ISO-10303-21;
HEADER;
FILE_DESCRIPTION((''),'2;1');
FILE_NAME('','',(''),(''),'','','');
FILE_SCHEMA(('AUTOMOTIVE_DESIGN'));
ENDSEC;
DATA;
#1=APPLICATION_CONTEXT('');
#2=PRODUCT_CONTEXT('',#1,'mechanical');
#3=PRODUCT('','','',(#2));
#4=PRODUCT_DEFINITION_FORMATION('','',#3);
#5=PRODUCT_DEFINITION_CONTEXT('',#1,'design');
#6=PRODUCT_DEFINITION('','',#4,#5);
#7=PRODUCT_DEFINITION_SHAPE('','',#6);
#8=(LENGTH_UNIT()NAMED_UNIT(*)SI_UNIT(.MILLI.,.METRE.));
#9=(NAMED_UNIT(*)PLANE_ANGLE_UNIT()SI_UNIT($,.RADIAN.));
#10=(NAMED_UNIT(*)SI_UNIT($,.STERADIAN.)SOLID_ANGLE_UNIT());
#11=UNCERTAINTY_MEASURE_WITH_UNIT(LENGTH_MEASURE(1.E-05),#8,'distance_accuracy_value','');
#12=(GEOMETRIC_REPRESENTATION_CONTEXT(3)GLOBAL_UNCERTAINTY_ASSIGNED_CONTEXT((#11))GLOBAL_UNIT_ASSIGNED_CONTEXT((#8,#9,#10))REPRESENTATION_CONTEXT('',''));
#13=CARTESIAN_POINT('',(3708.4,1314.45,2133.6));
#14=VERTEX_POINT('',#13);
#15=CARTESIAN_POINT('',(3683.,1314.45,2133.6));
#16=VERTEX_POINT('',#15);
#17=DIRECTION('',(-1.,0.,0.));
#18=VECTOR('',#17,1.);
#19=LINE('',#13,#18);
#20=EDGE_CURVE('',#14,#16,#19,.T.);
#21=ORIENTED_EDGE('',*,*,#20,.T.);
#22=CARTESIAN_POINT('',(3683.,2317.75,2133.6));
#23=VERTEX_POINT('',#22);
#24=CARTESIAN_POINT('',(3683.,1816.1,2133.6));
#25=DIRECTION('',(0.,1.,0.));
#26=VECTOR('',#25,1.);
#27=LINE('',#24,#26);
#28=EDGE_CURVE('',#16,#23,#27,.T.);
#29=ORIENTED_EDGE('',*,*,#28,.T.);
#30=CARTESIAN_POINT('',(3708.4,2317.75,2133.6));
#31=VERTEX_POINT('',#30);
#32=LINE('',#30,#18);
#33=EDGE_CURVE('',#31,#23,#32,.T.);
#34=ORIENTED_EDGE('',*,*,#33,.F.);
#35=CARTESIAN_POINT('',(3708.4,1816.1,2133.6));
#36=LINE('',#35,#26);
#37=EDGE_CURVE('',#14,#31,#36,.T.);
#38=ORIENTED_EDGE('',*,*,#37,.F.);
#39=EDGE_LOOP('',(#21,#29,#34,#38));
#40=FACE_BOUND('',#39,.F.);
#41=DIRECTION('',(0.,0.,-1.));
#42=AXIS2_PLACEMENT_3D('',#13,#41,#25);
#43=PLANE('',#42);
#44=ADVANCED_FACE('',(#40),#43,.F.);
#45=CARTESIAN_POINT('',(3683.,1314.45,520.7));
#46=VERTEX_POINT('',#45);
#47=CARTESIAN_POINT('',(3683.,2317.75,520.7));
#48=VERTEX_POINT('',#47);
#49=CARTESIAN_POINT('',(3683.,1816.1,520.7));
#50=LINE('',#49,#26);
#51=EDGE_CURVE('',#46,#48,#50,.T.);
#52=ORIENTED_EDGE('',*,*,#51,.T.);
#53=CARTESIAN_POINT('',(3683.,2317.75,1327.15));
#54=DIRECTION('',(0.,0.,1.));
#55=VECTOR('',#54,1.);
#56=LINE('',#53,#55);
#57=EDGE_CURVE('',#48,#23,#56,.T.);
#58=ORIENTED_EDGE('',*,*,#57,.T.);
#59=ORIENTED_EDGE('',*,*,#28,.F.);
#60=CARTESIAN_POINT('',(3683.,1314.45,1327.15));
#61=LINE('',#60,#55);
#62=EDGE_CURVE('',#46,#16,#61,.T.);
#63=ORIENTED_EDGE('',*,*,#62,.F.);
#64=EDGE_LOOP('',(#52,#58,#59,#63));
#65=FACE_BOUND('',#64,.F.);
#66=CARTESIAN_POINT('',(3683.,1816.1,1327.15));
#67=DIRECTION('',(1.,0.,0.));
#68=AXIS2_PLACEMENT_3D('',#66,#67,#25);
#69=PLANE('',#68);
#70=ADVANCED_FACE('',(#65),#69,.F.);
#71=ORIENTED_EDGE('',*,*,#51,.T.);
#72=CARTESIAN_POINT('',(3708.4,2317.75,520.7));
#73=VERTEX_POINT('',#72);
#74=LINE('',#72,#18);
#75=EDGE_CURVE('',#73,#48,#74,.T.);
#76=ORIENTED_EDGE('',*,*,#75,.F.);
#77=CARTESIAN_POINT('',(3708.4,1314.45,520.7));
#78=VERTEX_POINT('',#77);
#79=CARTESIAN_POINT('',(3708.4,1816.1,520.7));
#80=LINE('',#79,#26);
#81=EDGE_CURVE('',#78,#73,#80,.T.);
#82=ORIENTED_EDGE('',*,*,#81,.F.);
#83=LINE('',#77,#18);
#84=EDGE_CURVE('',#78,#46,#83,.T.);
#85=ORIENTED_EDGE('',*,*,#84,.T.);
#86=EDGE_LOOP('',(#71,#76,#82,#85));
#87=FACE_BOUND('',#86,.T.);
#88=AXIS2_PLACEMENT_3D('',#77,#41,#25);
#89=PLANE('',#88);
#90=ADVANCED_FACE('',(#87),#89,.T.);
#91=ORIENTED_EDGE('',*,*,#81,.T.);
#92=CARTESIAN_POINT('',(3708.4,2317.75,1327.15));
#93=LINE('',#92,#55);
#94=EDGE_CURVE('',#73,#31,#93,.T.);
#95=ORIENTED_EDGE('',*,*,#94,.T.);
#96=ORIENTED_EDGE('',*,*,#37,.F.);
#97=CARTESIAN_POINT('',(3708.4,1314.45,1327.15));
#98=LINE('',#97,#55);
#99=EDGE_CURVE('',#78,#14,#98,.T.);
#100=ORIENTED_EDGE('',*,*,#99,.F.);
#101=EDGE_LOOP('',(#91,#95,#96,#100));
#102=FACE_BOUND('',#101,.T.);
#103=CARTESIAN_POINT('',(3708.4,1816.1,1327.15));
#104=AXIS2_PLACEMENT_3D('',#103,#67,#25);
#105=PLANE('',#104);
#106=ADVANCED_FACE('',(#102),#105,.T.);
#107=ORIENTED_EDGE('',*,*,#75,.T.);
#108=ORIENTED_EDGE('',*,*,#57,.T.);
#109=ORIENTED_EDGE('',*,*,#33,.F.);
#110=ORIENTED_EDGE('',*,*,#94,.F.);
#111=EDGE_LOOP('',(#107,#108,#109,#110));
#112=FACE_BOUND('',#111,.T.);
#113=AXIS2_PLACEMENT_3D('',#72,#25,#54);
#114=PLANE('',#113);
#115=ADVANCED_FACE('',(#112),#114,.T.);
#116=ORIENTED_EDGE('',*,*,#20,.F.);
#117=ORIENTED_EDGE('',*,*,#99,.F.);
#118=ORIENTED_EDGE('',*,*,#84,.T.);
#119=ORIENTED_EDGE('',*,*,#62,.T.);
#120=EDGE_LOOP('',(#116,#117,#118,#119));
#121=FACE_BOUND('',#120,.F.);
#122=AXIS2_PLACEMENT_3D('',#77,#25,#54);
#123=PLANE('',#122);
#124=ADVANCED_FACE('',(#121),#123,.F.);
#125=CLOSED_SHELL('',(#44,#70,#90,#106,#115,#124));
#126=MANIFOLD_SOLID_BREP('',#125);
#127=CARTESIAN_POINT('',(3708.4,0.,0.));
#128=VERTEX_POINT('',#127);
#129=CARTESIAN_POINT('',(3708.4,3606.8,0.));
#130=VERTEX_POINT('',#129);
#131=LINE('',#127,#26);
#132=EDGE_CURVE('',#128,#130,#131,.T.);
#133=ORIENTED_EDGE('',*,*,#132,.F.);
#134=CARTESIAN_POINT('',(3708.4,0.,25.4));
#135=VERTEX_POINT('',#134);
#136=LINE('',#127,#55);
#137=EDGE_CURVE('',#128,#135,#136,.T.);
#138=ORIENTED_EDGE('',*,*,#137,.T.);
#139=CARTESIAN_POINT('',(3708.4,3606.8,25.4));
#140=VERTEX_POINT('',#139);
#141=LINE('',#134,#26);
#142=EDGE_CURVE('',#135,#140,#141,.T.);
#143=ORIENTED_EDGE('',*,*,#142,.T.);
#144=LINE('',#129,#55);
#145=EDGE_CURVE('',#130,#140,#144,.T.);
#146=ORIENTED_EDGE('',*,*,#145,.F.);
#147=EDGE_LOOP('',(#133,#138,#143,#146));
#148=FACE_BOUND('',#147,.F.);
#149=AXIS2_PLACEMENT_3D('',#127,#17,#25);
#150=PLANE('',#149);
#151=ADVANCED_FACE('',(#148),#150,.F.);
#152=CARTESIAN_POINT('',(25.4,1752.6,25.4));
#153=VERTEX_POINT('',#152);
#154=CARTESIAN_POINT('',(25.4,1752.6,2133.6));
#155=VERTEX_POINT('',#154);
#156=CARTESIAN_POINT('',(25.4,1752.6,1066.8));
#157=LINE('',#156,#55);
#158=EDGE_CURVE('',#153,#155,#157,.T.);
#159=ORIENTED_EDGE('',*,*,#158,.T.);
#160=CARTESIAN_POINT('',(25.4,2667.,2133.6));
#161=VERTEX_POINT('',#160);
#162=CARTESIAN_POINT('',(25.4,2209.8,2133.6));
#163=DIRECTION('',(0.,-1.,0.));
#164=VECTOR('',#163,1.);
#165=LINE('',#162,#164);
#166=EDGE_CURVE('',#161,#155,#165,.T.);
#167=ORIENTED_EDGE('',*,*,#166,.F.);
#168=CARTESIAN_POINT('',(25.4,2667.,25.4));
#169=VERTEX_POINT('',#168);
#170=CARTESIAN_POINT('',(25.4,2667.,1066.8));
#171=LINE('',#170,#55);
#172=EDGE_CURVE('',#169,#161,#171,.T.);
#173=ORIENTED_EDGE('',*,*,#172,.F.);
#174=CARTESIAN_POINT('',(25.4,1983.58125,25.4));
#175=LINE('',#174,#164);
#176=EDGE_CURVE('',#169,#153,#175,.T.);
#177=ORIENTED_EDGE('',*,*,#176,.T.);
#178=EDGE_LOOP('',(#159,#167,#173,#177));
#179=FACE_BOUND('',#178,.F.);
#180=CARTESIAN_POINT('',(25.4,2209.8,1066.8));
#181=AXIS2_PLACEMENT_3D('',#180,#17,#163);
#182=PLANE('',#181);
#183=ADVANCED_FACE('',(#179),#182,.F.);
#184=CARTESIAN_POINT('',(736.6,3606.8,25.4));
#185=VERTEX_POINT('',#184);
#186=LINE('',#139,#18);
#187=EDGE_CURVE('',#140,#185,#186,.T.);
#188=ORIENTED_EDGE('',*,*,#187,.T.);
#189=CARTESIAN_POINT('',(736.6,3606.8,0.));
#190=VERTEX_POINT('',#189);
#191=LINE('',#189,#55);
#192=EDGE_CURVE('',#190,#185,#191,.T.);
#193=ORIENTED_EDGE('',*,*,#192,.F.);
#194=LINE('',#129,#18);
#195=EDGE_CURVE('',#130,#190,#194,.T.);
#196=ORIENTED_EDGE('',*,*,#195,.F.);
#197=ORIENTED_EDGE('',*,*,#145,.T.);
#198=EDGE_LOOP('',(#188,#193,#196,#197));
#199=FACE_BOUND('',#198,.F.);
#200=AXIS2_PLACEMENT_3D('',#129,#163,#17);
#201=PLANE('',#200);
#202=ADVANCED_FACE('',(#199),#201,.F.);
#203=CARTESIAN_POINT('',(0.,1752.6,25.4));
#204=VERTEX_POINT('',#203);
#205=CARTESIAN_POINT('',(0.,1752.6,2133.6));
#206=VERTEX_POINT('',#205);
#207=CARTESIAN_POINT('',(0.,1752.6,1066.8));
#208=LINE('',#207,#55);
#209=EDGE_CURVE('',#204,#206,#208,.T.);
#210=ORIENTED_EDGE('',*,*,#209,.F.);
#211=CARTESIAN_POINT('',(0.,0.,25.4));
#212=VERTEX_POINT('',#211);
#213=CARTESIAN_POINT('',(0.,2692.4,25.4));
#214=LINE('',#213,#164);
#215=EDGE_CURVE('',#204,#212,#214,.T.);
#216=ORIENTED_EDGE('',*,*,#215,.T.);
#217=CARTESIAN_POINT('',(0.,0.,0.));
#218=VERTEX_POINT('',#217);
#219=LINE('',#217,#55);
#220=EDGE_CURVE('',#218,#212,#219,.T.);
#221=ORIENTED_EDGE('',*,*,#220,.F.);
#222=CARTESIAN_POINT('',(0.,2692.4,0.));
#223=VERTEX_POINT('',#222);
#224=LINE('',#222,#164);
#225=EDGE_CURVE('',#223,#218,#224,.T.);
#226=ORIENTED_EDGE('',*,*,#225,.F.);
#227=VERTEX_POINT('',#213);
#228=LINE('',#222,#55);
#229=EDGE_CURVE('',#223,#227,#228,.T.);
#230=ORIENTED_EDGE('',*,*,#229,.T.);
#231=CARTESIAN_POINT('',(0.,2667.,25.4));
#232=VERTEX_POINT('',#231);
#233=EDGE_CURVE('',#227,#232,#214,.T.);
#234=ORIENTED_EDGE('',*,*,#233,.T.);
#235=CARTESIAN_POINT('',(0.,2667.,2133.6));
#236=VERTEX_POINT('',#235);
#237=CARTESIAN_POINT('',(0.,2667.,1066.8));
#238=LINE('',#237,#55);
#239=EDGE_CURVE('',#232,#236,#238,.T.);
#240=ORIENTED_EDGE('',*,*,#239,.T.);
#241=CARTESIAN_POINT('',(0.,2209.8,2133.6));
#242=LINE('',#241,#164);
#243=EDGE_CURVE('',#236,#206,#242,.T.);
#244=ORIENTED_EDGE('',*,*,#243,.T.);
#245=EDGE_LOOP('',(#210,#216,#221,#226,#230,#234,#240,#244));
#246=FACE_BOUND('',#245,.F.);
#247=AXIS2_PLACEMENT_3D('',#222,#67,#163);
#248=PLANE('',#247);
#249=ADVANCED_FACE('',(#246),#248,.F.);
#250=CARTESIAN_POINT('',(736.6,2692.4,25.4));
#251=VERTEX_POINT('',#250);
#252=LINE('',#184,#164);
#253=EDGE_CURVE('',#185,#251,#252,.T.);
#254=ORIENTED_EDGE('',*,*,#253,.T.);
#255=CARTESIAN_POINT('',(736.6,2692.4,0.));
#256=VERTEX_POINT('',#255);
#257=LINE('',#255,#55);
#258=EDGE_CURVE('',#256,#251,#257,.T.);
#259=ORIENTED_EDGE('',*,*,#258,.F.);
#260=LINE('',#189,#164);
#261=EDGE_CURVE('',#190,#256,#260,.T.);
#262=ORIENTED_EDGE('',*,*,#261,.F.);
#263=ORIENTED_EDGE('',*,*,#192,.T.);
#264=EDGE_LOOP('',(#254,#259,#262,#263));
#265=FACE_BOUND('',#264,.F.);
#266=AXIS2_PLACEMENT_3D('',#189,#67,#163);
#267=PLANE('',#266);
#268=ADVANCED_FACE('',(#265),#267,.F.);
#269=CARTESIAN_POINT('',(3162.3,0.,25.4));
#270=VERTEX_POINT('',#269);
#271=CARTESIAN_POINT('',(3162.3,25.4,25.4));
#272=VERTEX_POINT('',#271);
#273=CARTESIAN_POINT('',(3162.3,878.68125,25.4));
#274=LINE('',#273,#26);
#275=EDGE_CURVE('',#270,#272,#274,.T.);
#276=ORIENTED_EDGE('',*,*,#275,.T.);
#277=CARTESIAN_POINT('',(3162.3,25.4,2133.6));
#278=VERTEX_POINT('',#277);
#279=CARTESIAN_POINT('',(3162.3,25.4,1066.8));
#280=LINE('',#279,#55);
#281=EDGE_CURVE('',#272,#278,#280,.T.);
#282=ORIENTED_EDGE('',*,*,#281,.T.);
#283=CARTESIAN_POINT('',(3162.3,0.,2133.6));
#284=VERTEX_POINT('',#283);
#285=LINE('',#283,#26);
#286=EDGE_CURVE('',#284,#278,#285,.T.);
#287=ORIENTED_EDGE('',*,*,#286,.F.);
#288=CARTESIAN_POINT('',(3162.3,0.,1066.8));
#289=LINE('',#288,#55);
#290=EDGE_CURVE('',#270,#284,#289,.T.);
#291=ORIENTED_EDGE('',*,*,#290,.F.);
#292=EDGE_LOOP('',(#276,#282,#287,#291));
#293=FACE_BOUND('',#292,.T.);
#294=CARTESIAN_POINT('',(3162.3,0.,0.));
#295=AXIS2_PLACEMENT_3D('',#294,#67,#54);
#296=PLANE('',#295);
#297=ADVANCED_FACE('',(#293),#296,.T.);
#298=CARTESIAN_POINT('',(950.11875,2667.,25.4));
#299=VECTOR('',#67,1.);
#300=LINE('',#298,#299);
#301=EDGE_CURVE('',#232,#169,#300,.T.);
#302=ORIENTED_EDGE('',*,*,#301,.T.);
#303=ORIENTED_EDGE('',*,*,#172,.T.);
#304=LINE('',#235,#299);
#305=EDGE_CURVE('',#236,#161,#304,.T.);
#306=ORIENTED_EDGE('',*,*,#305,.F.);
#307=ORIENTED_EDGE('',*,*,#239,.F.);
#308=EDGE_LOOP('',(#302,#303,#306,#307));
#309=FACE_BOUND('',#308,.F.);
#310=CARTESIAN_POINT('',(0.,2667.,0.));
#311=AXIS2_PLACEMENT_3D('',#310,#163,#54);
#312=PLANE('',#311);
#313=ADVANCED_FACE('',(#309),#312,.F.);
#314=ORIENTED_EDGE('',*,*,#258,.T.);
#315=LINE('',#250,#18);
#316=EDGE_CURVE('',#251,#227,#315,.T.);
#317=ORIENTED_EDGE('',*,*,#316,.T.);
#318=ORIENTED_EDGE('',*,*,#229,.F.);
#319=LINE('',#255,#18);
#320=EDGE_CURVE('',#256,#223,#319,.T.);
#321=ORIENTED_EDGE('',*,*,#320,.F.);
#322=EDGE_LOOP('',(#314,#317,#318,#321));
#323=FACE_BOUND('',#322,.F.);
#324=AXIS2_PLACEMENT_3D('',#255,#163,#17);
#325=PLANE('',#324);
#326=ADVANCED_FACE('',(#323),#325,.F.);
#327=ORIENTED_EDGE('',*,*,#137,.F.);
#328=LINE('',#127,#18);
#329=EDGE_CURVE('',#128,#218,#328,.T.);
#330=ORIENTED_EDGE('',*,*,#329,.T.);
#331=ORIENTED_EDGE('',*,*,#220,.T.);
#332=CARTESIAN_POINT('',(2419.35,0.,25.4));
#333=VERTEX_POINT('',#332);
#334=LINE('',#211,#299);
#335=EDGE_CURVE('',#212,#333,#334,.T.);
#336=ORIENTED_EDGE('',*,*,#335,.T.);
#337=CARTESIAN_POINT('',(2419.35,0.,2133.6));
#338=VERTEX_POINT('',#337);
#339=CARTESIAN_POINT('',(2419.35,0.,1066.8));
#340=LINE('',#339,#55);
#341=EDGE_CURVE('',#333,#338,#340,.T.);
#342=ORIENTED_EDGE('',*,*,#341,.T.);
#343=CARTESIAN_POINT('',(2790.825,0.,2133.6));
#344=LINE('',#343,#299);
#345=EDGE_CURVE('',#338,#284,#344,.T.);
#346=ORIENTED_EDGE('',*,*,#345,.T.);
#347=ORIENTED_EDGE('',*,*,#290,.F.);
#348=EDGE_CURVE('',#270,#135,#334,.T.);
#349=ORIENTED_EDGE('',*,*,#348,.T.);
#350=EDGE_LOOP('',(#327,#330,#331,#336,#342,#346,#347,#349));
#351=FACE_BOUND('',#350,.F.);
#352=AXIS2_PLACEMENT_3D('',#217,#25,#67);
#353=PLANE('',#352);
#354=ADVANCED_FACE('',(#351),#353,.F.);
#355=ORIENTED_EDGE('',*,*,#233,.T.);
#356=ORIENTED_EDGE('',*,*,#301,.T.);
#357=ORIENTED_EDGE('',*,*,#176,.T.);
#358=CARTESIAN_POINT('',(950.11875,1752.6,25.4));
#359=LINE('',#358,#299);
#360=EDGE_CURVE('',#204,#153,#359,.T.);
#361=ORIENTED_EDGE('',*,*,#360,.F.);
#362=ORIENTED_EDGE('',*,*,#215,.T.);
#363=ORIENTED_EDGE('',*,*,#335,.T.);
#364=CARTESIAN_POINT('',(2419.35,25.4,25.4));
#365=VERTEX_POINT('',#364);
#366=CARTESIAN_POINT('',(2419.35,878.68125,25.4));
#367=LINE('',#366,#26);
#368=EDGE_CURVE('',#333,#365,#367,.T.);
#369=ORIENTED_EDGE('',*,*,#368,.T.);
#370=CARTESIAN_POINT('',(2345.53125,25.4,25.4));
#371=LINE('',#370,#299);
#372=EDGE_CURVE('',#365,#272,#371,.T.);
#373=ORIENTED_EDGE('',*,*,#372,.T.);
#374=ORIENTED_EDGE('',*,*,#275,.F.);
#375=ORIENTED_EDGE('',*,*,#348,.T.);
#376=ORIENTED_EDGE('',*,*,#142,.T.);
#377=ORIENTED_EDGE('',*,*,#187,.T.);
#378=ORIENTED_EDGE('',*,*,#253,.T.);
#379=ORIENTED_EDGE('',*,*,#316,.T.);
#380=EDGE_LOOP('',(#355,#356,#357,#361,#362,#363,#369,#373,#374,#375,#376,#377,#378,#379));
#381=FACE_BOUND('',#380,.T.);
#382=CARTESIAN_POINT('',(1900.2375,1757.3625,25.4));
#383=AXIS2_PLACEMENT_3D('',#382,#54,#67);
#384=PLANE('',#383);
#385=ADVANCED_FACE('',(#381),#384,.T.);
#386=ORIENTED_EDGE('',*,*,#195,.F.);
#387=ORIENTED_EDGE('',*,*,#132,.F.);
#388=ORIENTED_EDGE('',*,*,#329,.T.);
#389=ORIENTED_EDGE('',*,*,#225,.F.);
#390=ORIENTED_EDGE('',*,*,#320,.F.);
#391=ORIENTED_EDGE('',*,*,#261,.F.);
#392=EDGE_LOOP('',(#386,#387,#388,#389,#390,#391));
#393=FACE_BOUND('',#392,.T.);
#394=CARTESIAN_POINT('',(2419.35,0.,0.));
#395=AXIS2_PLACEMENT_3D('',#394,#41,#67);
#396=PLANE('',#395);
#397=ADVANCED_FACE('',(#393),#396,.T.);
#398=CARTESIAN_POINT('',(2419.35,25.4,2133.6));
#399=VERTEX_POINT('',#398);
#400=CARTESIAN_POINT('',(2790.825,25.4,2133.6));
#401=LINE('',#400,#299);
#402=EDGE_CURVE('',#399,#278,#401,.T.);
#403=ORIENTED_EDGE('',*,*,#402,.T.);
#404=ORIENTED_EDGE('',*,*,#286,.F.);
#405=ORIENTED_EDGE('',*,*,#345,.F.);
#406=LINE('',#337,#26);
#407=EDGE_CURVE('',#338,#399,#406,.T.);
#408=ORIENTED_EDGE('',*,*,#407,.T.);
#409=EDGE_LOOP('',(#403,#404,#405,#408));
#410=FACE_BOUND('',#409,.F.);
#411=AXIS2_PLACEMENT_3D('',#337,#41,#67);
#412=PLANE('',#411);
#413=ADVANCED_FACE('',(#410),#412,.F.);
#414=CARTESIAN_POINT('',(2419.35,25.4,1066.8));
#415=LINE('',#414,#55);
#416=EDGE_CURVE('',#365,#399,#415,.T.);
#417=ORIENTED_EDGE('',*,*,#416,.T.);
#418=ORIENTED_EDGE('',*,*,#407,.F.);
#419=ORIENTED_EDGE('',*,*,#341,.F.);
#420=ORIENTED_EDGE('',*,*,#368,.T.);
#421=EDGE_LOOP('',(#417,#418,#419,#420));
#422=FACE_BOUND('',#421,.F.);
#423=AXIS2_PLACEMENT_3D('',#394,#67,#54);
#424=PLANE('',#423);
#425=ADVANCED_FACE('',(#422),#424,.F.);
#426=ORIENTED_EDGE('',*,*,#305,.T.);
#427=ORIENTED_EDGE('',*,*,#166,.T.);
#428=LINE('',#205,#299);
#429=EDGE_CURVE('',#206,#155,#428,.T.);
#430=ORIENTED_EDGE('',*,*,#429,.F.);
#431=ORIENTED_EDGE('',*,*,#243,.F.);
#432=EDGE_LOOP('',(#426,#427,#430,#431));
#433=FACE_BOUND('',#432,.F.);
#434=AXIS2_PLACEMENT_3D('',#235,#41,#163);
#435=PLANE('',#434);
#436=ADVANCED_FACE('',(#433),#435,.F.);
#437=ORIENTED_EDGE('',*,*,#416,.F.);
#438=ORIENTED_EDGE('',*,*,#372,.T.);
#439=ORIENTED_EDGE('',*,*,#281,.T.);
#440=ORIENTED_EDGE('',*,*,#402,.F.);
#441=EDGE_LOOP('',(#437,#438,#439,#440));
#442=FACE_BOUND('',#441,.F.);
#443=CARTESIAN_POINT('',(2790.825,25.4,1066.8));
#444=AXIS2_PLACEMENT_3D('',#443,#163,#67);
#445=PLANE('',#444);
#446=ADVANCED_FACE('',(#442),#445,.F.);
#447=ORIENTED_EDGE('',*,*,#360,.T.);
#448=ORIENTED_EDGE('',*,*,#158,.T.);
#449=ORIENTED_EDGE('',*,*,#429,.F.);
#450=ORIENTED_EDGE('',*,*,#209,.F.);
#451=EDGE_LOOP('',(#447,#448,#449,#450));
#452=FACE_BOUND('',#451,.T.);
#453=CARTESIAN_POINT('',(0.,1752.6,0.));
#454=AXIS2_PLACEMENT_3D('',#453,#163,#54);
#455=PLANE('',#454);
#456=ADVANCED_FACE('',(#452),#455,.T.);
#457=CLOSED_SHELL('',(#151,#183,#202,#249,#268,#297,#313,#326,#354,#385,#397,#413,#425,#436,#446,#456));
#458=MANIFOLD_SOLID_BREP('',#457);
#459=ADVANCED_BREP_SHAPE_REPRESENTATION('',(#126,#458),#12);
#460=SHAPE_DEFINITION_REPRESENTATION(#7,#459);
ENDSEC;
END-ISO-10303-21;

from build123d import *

# Parameters (mm, degrees)
F2_DEPTH = 25.4
F3_W     = 914.4
F3_H     = 2133.6
F4_DEPTH = 25.4
F5_W     = 742.95
F5_H     = 2133.6
F6_DEPTH = 25.4
F7_W     = 1003.3
F7_H     = 1612.9
F8_DEPTH = 25.4


with BuildPart() as f2:
    # F0 (on Top) → F2 (new body)
    with BuildSketch(Plane.XY):
        Polygon((0, 2692.4), (0, 0), (3708.4, 0), (3708.4, 3606.8), (736.6, 3606.8), (736.6, 2692.4), align=None)
    extrude(amount=F2_DEPTH)

    # F3 (on face) → F4 (join)
    with BuildSketch(Plane(origin=(0, 0, 0), x_dir=(0, -1, 0), z_dir=(-1, 0, 0))):
        with Locations((-2209.8, 1066.8)):
            Rectangle(F3_W, F3_H)
    extrude(amount=-F4_DEPTH)

    # F5 (on face) → F6 (join)
    with BuildSketch(Plane.XZ):
        with Locations((2790.825, 1066.8)):
            Rectangle(F5_W, F5_H)
    extrude(amount=-F6_DEPTH)


with BuildPart() as f8:
    # F7 (on face) → F8 (new body)
    with BuildSketch(Plane.YZ.offset(3708.4)):
        with Locations((1816.1, 1327.15)):
            Rectangle(F7_W, F7_H)
    extrude(amount=-F8_DEPTH)


solid = Compound([f2.part, f8.part])
